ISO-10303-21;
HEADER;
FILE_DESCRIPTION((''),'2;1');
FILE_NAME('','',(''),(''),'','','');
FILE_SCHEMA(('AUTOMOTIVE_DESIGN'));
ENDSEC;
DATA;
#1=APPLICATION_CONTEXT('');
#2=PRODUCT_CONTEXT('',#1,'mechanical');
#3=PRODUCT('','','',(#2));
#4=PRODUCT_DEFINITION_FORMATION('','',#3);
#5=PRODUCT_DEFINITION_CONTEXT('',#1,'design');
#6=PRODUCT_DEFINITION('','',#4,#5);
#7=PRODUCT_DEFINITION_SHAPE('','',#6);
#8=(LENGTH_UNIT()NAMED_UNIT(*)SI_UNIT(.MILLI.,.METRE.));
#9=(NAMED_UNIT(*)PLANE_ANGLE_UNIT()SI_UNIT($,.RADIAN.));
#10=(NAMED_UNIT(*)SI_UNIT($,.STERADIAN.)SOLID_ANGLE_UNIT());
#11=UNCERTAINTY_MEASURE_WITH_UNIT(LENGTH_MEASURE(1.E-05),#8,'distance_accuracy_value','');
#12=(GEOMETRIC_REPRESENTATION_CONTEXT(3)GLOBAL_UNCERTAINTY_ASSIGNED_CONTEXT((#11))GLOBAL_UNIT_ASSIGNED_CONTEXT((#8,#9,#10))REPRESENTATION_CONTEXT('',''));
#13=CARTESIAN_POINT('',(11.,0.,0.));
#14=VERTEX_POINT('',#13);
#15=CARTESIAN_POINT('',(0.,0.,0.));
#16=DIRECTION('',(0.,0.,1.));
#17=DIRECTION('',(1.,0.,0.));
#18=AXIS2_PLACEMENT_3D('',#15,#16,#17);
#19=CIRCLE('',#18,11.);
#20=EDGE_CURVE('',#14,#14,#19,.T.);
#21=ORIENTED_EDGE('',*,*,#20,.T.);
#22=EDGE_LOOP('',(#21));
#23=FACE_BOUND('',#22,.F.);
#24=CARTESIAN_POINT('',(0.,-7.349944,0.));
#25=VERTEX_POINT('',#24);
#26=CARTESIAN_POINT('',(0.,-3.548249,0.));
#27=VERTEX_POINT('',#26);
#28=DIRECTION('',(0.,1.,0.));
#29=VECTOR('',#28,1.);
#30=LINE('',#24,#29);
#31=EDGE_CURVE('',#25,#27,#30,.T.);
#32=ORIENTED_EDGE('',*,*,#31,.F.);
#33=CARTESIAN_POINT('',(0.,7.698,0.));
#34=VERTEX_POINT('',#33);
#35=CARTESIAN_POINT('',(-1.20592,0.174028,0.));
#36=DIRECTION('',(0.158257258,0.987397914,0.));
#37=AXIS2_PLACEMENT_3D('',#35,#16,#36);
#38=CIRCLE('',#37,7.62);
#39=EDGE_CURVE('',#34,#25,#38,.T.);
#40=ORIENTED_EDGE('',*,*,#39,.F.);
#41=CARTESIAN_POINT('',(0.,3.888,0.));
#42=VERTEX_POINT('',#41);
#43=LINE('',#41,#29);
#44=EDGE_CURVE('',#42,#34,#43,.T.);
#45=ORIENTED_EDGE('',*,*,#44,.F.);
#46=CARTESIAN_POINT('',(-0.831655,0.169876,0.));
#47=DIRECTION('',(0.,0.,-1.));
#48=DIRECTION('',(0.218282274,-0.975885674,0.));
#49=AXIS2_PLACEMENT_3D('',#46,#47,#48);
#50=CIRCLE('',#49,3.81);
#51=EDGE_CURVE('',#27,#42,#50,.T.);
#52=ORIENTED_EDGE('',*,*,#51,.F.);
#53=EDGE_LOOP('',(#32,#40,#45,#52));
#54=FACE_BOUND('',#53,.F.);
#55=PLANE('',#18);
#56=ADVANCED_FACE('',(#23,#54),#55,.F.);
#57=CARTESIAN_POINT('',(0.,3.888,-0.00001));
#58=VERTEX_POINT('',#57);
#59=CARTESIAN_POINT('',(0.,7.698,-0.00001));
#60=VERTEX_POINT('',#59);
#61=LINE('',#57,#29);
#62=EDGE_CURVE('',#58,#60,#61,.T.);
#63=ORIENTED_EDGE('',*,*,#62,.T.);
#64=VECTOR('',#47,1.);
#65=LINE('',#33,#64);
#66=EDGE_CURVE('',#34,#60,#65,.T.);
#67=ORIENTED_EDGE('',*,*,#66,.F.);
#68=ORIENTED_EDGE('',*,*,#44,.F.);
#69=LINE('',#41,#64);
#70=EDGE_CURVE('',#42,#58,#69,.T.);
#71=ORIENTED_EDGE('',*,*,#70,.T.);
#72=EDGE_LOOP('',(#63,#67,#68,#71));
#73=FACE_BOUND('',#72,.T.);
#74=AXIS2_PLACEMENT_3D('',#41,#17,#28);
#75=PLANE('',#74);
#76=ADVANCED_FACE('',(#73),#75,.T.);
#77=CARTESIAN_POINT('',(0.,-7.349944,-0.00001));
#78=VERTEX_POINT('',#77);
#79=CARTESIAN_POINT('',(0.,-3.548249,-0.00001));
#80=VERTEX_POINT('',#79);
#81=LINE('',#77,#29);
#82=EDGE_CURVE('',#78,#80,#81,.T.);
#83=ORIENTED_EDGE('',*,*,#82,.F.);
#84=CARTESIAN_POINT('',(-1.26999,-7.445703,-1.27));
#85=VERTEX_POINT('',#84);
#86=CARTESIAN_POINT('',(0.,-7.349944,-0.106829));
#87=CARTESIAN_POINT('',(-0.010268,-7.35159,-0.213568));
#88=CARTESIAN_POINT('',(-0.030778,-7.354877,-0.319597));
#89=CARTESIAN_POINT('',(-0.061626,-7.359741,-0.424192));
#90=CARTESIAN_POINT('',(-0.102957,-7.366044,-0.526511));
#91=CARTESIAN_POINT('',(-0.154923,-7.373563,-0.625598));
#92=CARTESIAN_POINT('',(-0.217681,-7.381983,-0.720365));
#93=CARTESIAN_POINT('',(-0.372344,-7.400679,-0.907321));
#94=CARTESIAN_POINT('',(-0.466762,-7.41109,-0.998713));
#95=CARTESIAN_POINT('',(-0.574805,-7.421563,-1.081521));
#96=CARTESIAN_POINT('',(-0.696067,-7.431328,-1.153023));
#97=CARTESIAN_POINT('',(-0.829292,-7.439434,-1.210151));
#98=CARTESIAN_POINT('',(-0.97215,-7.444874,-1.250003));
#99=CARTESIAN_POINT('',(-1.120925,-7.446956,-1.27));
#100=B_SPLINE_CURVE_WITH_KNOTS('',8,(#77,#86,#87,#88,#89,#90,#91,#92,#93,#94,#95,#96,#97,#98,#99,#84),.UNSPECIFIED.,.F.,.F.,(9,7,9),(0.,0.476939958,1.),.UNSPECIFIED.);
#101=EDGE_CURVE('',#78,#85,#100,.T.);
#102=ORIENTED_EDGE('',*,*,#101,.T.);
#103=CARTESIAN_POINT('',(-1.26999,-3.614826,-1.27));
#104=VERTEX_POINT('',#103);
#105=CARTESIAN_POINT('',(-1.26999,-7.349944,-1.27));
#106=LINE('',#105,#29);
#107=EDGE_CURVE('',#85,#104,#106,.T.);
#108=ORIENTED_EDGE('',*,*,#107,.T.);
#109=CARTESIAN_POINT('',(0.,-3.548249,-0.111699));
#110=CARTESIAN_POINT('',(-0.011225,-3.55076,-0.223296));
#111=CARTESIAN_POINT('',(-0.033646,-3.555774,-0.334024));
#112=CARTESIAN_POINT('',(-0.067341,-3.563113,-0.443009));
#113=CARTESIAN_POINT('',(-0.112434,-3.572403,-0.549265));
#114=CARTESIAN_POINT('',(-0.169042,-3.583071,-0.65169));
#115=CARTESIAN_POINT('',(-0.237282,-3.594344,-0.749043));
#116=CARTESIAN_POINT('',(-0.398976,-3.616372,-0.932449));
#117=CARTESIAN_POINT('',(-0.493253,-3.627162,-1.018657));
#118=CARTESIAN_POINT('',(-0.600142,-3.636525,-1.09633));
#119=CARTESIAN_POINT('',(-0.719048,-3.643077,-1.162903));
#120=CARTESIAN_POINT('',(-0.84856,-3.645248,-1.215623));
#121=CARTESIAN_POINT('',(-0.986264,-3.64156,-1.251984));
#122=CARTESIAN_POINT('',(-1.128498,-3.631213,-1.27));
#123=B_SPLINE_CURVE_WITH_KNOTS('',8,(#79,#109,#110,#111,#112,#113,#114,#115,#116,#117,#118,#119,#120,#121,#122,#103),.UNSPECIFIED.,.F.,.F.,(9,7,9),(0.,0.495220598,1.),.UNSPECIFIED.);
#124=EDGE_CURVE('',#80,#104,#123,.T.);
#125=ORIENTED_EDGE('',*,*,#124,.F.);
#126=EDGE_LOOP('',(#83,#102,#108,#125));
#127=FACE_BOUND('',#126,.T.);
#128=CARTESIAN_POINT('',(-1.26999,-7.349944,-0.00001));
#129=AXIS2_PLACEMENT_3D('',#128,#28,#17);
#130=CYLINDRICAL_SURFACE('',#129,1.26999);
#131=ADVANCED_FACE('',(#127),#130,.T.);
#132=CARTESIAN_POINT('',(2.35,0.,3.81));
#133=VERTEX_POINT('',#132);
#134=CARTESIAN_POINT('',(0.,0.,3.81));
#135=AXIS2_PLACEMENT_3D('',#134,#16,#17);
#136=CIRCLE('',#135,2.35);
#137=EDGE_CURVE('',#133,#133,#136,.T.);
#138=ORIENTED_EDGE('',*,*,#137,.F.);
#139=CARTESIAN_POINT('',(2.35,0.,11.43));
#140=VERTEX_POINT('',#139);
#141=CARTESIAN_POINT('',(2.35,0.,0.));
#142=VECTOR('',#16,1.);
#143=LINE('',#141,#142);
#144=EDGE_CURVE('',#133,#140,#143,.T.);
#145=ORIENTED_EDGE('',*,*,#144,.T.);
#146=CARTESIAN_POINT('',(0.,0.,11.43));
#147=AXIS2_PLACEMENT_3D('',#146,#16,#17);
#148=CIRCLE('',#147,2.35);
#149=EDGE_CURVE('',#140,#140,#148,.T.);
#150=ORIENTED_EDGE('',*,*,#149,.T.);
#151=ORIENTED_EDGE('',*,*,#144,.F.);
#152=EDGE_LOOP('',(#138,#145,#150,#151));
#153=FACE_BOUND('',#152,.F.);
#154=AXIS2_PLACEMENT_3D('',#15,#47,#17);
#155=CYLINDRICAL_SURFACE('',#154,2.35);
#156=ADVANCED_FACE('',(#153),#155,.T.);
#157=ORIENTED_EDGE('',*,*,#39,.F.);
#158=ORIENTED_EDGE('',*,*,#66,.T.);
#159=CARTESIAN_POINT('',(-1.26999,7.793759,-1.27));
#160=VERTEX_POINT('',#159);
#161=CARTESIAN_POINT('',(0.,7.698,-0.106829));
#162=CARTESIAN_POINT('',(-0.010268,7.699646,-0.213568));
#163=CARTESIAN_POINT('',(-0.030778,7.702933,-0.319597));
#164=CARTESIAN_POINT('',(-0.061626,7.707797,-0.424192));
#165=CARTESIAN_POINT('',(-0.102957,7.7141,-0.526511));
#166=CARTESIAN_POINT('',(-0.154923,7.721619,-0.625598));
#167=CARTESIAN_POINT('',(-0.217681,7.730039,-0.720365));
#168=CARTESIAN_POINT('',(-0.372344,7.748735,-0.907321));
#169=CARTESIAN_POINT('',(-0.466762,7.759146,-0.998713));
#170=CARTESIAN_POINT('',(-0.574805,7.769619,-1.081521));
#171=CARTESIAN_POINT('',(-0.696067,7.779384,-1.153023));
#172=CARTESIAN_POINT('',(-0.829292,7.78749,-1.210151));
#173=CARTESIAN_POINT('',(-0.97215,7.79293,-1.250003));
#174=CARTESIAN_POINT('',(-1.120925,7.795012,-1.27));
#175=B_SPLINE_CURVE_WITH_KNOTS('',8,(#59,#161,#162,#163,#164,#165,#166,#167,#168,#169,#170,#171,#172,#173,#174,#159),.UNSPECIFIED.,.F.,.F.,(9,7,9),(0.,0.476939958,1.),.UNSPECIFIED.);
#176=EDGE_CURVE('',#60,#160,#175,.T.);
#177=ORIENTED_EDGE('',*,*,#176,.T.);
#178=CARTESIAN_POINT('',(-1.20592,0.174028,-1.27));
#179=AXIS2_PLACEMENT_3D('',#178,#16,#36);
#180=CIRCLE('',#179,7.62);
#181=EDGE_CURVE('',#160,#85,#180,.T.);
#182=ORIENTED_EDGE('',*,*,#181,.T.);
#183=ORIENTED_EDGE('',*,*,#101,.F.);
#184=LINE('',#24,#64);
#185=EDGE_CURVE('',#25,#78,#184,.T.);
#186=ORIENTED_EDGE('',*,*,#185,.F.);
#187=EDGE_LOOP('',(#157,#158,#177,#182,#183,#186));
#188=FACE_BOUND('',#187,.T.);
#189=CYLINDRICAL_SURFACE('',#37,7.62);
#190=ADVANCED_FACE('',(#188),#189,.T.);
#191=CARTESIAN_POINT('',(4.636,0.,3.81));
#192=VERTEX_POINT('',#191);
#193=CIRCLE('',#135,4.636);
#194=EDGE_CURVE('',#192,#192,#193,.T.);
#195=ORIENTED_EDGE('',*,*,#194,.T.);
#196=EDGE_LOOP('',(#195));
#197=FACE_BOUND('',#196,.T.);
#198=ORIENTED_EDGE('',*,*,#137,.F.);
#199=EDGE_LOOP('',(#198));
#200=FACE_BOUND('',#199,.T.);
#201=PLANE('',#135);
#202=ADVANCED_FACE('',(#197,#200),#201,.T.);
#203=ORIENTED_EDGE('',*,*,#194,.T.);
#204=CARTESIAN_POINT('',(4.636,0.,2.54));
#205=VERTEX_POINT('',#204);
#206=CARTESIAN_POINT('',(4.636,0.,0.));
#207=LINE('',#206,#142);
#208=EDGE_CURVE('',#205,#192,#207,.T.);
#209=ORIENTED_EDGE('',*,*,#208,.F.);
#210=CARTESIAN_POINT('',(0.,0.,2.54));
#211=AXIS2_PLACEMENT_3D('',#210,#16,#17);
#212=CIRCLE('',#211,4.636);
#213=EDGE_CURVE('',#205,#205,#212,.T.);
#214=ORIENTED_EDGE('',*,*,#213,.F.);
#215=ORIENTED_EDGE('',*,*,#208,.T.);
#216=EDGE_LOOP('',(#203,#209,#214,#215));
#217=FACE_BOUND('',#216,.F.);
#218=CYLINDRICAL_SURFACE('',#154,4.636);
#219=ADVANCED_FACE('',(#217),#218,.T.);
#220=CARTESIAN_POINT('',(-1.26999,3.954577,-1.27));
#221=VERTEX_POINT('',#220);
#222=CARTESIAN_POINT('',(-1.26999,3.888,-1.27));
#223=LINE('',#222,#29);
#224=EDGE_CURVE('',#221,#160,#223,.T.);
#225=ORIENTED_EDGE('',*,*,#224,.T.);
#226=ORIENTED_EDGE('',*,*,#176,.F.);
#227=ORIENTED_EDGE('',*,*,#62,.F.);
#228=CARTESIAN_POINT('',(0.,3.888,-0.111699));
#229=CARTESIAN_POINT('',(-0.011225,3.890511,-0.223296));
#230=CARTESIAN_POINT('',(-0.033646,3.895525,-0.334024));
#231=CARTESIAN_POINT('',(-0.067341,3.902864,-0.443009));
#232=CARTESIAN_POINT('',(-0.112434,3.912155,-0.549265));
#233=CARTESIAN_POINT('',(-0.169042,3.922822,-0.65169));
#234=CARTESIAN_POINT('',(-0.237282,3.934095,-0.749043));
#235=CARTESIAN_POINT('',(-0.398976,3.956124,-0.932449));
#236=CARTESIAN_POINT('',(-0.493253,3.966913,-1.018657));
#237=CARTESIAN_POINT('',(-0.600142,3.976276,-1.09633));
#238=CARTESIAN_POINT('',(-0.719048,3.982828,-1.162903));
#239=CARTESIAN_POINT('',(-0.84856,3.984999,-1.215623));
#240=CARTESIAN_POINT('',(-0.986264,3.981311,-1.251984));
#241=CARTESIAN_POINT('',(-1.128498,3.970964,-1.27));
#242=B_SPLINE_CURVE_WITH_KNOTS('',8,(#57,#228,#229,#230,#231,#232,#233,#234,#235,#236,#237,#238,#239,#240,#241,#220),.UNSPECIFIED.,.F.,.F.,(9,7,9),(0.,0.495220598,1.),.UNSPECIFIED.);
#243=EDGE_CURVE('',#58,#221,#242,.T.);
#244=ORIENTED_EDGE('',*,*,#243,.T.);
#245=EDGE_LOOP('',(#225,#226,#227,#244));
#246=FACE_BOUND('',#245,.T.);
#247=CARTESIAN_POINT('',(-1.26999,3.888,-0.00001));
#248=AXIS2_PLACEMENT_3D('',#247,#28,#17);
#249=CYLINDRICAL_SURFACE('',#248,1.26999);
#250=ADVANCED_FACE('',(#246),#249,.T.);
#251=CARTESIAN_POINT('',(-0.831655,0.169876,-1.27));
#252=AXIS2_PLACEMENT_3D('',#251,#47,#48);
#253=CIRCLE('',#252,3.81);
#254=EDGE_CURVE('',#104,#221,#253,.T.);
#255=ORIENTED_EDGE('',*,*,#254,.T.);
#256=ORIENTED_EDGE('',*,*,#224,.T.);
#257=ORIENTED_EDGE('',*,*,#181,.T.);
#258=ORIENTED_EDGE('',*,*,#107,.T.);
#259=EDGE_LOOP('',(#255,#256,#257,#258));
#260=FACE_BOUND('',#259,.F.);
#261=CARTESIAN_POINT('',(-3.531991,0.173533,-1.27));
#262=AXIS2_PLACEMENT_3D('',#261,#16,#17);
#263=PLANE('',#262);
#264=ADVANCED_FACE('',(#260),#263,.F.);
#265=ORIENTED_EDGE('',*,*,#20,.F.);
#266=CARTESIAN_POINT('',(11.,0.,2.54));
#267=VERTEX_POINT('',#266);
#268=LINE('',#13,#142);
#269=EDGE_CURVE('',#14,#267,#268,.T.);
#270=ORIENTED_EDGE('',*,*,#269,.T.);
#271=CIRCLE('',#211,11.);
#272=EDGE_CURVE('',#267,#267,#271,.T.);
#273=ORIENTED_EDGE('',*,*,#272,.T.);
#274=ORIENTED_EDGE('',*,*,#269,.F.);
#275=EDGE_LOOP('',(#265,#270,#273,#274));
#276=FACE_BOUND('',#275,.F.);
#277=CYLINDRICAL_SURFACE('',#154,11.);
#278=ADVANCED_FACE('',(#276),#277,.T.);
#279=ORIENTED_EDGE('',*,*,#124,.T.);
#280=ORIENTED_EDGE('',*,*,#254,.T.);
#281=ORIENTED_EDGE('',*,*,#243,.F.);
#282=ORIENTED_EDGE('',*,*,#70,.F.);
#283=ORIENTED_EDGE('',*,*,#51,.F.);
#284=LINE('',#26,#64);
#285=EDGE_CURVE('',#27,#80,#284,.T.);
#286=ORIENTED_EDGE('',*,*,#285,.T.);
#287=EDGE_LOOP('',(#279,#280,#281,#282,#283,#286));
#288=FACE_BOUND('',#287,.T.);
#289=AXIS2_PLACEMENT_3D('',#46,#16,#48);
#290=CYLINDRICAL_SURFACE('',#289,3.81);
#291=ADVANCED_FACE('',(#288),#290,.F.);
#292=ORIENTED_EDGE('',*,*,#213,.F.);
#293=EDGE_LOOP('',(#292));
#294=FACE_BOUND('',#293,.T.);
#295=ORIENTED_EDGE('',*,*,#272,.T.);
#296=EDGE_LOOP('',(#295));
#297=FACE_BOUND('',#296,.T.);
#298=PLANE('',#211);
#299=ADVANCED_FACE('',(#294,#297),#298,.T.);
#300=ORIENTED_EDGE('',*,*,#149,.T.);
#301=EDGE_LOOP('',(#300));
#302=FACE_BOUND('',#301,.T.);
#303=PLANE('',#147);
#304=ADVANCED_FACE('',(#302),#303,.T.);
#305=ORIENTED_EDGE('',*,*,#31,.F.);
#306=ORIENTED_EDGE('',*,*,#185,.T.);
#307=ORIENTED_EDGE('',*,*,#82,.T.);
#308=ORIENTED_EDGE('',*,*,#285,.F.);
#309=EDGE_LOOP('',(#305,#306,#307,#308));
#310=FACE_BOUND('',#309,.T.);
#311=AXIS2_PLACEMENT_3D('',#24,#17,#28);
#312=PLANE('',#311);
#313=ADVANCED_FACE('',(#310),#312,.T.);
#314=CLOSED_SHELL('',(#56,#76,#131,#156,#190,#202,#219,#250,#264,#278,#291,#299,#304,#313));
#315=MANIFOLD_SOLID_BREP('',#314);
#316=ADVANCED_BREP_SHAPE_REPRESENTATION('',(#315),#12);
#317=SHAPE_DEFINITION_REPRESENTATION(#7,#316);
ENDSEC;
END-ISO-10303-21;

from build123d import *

# Parameters (mm, degrees)
F0_R     = 2.35
F1_DEPTH = 11.43
F0_R_2   = 4.636
F2_DEPTH = 3.81
F0_R_3   = 11
F3_DEPTH = 2.54
F5_DEPTH = 1.27
F6_R     = 1.26999


# Not quite as in the source:
# - a fillet or chamfer is up to 0.001 mm smaller than in the source, because OpenCascade refuses the exact size


with BuildPart() as f1:
    # F0 (on Top) → F1 (new body)
    with BuildSketch(Plane.XY):
        Circle(F0_R)
    extrude(amount=F1_DEPTH)

    # F0 (on Top) → F2 (join)
    with BuildSketch(Plane.XY):
        Circle(F0_R_2)
        Circle(F0_R, mode=Mode.SUBTRACT)
    extrude(amount=F2_DEPTH)

    # F0 (on Top) → F3 (join)
    with BuildSketch(Plane.XY):
        Circle(F0_R_3)
        Circle(F0_R_2, mode=Mode.SUBTRACT)
    extrude(amount=F3_DEPTH)

    # F4 (on face) → F5 (join)
    with BuildSketch(Plane.XY):
        with BuildLine():
            Line((0, 3.888), (0, 7.698))
            ThreePointArc((0, 7.698), (-8.8259203096, 0.174027897), (0, -7.349944206))
            Line((0, -7.349944206), (0, -3.5482488357))
            ThreePointArc((0, -3.5482488357), (-4.6416554656, 0.1698755822), (0, 3.888))
        make_face()
    extrude(amount=-F5_DEPTH)

    # F6 (radius 1.27 in the source; OpenCascade refuses exactly that, so slightly less here)
    f6_edges = [f1.edges().sort_by_distance(p)[0] for p in [
        (0, 5.793, -1.27),
        (0, -5.449097, -1.27),
    ]]
    fillet(f6_edges, radius=F6_R)


solid = f1.part
